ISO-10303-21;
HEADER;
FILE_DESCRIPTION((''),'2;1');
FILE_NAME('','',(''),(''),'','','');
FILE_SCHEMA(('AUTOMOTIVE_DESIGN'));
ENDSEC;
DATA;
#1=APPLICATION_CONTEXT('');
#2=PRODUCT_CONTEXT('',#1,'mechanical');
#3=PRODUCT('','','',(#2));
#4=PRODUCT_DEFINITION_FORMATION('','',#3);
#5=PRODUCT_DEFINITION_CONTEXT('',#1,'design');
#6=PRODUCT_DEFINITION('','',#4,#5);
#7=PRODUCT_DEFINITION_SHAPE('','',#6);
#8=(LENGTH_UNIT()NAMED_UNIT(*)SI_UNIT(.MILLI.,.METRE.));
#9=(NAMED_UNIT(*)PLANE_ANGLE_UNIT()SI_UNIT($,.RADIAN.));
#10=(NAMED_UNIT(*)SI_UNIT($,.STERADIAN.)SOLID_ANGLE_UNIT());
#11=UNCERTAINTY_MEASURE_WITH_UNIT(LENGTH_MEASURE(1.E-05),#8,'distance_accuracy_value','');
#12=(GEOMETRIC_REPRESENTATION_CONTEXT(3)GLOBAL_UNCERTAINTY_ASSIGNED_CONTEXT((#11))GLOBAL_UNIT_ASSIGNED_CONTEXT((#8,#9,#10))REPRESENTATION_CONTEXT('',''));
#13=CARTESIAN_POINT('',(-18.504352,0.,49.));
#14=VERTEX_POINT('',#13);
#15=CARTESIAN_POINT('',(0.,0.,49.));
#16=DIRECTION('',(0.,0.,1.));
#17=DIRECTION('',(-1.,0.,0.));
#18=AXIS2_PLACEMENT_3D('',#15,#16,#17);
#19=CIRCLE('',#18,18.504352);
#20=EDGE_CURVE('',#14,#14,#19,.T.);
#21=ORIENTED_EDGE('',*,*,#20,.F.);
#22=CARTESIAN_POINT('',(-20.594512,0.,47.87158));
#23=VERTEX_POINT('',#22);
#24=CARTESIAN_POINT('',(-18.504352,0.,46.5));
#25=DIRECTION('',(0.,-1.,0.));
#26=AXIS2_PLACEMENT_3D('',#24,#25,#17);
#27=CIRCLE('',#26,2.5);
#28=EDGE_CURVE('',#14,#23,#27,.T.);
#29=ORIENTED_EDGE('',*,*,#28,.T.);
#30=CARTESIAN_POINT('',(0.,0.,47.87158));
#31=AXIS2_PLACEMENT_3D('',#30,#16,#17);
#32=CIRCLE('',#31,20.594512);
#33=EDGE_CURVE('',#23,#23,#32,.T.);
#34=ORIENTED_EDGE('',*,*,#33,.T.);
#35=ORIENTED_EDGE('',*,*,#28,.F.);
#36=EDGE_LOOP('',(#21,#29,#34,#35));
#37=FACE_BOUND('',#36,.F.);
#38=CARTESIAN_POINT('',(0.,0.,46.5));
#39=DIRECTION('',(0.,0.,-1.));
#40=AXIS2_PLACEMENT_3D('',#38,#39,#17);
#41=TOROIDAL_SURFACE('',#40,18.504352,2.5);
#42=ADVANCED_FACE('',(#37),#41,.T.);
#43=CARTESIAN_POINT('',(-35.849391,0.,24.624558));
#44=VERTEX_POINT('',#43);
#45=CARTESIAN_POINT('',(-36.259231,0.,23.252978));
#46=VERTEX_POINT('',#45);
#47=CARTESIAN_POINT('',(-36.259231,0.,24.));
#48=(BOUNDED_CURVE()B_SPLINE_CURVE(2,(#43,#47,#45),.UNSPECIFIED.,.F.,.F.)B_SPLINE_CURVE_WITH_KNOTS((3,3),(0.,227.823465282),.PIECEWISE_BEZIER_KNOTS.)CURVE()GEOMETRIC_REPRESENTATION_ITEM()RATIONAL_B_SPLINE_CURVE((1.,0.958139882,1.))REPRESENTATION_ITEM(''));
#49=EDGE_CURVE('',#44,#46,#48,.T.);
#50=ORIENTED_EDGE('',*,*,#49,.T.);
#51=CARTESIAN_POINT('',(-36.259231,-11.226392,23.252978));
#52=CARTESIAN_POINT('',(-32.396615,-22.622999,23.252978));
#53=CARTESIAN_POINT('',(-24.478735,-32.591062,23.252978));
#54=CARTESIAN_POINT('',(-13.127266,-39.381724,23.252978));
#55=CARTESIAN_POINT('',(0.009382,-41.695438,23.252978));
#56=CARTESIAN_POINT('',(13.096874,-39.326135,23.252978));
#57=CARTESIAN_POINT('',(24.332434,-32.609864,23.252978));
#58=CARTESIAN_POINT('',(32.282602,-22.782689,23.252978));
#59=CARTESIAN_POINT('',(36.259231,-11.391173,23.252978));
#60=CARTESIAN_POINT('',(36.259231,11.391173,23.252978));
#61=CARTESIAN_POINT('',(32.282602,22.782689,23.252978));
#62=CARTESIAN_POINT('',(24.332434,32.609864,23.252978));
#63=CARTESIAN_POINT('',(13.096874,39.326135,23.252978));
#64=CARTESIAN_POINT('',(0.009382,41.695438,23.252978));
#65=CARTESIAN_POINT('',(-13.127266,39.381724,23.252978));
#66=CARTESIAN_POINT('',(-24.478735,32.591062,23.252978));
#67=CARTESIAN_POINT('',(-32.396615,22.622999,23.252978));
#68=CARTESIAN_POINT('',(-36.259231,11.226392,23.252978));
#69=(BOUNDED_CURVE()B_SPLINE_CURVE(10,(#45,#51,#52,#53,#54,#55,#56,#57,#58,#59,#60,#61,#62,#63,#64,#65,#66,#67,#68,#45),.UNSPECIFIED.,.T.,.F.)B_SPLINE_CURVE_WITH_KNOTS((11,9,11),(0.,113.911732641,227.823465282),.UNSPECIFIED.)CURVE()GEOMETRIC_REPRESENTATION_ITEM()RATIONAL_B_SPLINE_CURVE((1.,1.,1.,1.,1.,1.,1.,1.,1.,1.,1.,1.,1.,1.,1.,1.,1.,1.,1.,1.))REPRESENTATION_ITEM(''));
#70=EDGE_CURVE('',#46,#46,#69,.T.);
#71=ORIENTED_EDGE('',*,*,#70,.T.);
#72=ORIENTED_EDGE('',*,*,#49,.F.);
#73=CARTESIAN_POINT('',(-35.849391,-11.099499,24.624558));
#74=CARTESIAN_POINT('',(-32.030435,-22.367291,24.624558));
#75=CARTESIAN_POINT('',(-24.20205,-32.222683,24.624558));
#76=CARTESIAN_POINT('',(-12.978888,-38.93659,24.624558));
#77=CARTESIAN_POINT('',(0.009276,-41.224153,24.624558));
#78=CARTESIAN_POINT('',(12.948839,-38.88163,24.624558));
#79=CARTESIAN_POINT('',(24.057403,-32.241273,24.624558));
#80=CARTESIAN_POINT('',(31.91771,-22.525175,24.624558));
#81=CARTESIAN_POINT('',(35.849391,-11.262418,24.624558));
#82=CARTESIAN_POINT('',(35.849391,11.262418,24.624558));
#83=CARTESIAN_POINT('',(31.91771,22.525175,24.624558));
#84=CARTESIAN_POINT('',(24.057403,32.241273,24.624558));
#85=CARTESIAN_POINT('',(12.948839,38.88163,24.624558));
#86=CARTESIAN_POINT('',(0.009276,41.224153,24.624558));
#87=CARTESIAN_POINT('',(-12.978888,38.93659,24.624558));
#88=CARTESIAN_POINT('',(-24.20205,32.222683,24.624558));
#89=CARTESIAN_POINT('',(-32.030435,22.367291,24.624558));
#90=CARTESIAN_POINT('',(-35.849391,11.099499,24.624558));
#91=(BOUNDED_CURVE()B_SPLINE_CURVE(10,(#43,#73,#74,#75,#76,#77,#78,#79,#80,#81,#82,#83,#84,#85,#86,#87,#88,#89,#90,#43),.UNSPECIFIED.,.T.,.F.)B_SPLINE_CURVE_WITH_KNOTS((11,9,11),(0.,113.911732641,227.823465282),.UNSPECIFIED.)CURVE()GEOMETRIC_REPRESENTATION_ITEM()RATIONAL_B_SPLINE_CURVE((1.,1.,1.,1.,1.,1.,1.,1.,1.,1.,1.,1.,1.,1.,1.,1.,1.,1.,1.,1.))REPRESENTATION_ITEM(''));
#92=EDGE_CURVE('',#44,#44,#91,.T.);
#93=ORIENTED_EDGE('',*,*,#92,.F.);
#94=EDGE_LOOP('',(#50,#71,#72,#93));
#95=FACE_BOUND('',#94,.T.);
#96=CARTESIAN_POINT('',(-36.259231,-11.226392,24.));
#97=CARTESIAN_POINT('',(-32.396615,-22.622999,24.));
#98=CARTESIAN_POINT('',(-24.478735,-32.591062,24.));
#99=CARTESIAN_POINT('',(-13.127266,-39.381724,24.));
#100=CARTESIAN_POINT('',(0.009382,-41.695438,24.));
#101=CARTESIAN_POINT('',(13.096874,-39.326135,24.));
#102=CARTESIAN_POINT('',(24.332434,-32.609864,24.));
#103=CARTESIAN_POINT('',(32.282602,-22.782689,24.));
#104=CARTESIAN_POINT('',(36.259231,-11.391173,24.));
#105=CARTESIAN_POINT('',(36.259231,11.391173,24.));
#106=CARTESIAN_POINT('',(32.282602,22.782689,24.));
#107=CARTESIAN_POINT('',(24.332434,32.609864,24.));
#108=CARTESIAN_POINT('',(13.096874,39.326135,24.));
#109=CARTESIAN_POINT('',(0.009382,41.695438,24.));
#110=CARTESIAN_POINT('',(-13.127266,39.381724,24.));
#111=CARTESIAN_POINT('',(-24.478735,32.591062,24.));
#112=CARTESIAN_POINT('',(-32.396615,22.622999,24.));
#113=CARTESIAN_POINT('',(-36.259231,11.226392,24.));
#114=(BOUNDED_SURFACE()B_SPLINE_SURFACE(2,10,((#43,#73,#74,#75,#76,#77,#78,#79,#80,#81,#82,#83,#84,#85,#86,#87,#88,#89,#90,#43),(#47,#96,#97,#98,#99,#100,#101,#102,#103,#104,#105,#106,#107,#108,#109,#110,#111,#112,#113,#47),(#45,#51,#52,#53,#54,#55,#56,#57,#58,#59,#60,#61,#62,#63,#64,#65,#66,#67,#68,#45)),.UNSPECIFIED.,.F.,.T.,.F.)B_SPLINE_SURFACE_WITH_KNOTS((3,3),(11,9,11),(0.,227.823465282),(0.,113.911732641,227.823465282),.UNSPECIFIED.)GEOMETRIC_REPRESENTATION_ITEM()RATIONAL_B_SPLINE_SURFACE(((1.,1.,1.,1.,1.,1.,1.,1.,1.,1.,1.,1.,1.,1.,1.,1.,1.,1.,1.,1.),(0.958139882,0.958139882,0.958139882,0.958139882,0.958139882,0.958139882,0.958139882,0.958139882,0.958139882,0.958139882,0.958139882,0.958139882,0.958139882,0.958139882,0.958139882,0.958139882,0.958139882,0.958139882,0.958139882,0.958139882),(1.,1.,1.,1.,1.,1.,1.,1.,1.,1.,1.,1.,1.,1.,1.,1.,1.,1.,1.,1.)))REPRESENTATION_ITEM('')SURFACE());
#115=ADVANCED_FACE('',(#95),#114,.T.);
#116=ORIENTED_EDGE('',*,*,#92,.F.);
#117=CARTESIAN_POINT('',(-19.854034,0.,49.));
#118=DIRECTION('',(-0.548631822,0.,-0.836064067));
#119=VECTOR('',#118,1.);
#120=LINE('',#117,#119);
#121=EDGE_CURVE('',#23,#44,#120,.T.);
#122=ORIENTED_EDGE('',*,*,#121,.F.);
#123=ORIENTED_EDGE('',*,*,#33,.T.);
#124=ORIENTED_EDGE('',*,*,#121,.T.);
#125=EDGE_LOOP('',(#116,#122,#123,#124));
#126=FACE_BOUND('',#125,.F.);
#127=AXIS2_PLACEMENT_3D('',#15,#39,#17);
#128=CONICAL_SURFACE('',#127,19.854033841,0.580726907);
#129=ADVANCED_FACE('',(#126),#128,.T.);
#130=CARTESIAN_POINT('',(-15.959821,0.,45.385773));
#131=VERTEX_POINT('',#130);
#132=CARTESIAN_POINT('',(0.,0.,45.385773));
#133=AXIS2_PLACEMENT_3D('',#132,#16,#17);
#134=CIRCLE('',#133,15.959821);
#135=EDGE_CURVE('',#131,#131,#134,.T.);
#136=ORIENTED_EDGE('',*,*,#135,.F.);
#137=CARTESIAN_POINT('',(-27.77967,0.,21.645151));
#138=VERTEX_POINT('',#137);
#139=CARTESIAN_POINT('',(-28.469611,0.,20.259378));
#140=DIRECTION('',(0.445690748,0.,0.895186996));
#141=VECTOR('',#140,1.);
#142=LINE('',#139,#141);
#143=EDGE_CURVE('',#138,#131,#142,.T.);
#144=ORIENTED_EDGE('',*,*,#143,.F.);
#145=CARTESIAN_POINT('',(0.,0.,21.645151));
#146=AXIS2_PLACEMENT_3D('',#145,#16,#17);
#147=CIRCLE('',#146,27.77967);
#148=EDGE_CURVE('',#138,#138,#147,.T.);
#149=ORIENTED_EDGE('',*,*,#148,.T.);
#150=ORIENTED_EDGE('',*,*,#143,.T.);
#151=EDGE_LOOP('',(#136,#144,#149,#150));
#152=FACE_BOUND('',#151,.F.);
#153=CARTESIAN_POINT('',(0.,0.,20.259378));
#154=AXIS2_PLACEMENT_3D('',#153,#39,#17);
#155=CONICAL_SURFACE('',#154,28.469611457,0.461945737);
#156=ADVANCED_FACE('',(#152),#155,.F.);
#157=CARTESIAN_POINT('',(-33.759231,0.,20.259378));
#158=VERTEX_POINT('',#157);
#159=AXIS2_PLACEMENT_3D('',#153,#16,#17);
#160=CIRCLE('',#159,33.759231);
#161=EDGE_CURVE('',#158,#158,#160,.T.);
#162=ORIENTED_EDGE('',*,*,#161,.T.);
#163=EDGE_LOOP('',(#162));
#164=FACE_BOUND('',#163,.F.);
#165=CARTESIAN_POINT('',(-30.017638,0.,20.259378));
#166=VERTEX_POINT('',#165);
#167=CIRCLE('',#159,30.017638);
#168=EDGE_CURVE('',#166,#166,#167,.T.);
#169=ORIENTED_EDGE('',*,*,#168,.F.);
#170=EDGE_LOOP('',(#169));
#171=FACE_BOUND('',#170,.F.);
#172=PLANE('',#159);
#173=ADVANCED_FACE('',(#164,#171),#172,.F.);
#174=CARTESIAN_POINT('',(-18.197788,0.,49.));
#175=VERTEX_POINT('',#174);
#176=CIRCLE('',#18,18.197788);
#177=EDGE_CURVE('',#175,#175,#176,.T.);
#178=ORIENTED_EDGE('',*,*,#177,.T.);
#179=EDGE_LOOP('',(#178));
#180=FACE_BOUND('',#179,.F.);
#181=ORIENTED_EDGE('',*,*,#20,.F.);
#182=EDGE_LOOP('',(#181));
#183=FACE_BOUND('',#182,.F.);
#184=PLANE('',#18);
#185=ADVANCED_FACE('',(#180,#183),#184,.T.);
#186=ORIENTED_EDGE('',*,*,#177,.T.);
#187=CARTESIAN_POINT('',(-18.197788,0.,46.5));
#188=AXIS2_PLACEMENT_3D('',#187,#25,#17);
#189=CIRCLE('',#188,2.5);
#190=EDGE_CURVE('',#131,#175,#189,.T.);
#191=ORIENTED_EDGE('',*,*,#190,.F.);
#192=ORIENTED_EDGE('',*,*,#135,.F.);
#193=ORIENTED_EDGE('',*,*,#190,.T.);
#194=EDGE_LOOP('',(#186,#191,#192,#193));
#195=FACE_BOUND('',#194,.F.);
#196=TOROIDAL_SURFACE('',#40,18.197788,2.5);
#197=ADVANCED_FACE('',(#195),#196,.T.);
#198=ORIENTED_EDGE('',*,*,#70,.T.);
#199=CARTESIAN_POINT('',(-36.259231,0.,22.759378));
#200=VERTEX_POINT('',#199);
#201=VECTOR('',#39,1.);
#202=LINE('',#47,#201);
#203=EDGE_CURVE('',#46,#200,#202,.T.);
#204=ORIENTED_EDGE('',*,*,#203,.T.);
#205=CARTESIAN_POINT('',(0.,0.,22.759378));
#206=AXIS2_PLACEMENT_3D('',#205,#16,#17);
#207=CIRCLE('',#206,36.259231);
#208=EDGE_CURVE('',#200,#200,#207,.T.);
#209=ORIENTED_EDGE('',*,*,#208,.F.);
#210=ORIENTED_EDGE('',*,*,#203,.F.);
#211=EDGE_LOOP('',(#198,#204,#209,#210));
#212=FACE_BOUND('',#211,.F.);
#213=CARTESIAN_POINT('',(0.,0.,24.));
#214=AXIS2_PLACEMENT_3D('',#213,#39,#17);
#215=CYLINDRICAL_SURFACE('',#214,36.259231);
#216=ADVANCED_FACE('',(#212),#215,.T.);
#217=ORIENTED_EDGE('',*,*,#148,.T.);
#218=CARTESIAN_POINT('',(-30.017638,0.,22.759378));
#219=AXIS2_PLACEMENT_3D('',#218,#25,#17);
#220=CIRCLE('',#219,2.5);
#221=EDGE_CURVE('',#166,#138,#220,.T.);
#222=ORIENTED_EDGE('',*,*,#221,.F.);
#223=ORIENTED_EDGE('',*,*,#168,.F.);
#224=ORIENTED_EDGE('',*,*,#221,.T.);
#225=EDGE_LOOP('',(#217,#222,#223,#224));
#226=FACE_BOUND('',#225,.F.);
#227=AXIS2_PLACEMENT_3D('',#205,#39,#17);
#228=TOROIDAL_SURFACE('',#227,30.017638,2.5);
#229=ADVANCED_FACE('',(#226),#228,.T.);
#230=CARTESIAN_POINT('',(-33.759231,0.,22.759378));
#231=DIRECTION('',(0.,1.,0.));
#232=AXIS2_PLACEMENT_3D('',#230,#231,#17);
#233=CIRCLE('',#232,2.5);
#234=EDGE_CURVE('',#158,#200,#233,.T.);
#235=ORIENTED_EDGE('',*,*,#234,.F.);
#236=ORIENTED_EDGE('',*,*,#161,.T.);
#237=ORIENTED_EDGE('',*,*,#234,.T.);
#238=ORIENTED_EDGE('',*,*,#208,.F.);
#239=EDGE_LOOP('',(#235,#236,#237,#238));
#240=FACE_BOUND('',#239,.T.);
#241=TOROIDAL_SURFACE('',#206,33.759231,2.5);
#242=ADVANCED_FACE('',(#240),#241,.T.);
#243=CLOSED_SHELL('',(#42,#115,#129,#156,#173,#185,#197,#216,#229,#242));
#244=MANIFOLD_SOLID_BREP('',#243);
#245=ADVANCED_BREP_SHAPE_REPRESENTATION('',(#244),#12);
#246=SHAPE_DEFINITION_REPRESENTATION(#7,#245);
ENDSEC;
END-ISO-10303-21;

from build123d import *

# Parameters (mm, degrees)
F5_R = 2.5


# Not quite as in the source:
# - the program builds the solid bodies; features that only make, move or delete a surface that nothing else refers to are left out


with BuildPart() as f4:
    # F3 (on Front) → F4 (revolve)
    with BuildSketch(Plane.XZ):
        Polygon((-36.259230652, 20.2593781938), (-28.4696114573, 20.2593781938), (-14.1603897064, 49), (-19.8540338413, 49), (-36.259230652, 24), align=None)
    revolve(axis=Axis((0, 0, 18.828805536), (0, 0, 1)))

    # F5
    f5_edges = [f4.edges().sort_by_distance(p)[0] for p in [
        (19.854034, 0, 49),
        (14.16039, 0, 49),
        (36.259231, 0, 24),
        (36.259231, 0, 20.259378),
        (28.469611, 0, 20.259378),
    ]]
    fillet(f5_edges, radius=F5_R)


solid = f4.part
